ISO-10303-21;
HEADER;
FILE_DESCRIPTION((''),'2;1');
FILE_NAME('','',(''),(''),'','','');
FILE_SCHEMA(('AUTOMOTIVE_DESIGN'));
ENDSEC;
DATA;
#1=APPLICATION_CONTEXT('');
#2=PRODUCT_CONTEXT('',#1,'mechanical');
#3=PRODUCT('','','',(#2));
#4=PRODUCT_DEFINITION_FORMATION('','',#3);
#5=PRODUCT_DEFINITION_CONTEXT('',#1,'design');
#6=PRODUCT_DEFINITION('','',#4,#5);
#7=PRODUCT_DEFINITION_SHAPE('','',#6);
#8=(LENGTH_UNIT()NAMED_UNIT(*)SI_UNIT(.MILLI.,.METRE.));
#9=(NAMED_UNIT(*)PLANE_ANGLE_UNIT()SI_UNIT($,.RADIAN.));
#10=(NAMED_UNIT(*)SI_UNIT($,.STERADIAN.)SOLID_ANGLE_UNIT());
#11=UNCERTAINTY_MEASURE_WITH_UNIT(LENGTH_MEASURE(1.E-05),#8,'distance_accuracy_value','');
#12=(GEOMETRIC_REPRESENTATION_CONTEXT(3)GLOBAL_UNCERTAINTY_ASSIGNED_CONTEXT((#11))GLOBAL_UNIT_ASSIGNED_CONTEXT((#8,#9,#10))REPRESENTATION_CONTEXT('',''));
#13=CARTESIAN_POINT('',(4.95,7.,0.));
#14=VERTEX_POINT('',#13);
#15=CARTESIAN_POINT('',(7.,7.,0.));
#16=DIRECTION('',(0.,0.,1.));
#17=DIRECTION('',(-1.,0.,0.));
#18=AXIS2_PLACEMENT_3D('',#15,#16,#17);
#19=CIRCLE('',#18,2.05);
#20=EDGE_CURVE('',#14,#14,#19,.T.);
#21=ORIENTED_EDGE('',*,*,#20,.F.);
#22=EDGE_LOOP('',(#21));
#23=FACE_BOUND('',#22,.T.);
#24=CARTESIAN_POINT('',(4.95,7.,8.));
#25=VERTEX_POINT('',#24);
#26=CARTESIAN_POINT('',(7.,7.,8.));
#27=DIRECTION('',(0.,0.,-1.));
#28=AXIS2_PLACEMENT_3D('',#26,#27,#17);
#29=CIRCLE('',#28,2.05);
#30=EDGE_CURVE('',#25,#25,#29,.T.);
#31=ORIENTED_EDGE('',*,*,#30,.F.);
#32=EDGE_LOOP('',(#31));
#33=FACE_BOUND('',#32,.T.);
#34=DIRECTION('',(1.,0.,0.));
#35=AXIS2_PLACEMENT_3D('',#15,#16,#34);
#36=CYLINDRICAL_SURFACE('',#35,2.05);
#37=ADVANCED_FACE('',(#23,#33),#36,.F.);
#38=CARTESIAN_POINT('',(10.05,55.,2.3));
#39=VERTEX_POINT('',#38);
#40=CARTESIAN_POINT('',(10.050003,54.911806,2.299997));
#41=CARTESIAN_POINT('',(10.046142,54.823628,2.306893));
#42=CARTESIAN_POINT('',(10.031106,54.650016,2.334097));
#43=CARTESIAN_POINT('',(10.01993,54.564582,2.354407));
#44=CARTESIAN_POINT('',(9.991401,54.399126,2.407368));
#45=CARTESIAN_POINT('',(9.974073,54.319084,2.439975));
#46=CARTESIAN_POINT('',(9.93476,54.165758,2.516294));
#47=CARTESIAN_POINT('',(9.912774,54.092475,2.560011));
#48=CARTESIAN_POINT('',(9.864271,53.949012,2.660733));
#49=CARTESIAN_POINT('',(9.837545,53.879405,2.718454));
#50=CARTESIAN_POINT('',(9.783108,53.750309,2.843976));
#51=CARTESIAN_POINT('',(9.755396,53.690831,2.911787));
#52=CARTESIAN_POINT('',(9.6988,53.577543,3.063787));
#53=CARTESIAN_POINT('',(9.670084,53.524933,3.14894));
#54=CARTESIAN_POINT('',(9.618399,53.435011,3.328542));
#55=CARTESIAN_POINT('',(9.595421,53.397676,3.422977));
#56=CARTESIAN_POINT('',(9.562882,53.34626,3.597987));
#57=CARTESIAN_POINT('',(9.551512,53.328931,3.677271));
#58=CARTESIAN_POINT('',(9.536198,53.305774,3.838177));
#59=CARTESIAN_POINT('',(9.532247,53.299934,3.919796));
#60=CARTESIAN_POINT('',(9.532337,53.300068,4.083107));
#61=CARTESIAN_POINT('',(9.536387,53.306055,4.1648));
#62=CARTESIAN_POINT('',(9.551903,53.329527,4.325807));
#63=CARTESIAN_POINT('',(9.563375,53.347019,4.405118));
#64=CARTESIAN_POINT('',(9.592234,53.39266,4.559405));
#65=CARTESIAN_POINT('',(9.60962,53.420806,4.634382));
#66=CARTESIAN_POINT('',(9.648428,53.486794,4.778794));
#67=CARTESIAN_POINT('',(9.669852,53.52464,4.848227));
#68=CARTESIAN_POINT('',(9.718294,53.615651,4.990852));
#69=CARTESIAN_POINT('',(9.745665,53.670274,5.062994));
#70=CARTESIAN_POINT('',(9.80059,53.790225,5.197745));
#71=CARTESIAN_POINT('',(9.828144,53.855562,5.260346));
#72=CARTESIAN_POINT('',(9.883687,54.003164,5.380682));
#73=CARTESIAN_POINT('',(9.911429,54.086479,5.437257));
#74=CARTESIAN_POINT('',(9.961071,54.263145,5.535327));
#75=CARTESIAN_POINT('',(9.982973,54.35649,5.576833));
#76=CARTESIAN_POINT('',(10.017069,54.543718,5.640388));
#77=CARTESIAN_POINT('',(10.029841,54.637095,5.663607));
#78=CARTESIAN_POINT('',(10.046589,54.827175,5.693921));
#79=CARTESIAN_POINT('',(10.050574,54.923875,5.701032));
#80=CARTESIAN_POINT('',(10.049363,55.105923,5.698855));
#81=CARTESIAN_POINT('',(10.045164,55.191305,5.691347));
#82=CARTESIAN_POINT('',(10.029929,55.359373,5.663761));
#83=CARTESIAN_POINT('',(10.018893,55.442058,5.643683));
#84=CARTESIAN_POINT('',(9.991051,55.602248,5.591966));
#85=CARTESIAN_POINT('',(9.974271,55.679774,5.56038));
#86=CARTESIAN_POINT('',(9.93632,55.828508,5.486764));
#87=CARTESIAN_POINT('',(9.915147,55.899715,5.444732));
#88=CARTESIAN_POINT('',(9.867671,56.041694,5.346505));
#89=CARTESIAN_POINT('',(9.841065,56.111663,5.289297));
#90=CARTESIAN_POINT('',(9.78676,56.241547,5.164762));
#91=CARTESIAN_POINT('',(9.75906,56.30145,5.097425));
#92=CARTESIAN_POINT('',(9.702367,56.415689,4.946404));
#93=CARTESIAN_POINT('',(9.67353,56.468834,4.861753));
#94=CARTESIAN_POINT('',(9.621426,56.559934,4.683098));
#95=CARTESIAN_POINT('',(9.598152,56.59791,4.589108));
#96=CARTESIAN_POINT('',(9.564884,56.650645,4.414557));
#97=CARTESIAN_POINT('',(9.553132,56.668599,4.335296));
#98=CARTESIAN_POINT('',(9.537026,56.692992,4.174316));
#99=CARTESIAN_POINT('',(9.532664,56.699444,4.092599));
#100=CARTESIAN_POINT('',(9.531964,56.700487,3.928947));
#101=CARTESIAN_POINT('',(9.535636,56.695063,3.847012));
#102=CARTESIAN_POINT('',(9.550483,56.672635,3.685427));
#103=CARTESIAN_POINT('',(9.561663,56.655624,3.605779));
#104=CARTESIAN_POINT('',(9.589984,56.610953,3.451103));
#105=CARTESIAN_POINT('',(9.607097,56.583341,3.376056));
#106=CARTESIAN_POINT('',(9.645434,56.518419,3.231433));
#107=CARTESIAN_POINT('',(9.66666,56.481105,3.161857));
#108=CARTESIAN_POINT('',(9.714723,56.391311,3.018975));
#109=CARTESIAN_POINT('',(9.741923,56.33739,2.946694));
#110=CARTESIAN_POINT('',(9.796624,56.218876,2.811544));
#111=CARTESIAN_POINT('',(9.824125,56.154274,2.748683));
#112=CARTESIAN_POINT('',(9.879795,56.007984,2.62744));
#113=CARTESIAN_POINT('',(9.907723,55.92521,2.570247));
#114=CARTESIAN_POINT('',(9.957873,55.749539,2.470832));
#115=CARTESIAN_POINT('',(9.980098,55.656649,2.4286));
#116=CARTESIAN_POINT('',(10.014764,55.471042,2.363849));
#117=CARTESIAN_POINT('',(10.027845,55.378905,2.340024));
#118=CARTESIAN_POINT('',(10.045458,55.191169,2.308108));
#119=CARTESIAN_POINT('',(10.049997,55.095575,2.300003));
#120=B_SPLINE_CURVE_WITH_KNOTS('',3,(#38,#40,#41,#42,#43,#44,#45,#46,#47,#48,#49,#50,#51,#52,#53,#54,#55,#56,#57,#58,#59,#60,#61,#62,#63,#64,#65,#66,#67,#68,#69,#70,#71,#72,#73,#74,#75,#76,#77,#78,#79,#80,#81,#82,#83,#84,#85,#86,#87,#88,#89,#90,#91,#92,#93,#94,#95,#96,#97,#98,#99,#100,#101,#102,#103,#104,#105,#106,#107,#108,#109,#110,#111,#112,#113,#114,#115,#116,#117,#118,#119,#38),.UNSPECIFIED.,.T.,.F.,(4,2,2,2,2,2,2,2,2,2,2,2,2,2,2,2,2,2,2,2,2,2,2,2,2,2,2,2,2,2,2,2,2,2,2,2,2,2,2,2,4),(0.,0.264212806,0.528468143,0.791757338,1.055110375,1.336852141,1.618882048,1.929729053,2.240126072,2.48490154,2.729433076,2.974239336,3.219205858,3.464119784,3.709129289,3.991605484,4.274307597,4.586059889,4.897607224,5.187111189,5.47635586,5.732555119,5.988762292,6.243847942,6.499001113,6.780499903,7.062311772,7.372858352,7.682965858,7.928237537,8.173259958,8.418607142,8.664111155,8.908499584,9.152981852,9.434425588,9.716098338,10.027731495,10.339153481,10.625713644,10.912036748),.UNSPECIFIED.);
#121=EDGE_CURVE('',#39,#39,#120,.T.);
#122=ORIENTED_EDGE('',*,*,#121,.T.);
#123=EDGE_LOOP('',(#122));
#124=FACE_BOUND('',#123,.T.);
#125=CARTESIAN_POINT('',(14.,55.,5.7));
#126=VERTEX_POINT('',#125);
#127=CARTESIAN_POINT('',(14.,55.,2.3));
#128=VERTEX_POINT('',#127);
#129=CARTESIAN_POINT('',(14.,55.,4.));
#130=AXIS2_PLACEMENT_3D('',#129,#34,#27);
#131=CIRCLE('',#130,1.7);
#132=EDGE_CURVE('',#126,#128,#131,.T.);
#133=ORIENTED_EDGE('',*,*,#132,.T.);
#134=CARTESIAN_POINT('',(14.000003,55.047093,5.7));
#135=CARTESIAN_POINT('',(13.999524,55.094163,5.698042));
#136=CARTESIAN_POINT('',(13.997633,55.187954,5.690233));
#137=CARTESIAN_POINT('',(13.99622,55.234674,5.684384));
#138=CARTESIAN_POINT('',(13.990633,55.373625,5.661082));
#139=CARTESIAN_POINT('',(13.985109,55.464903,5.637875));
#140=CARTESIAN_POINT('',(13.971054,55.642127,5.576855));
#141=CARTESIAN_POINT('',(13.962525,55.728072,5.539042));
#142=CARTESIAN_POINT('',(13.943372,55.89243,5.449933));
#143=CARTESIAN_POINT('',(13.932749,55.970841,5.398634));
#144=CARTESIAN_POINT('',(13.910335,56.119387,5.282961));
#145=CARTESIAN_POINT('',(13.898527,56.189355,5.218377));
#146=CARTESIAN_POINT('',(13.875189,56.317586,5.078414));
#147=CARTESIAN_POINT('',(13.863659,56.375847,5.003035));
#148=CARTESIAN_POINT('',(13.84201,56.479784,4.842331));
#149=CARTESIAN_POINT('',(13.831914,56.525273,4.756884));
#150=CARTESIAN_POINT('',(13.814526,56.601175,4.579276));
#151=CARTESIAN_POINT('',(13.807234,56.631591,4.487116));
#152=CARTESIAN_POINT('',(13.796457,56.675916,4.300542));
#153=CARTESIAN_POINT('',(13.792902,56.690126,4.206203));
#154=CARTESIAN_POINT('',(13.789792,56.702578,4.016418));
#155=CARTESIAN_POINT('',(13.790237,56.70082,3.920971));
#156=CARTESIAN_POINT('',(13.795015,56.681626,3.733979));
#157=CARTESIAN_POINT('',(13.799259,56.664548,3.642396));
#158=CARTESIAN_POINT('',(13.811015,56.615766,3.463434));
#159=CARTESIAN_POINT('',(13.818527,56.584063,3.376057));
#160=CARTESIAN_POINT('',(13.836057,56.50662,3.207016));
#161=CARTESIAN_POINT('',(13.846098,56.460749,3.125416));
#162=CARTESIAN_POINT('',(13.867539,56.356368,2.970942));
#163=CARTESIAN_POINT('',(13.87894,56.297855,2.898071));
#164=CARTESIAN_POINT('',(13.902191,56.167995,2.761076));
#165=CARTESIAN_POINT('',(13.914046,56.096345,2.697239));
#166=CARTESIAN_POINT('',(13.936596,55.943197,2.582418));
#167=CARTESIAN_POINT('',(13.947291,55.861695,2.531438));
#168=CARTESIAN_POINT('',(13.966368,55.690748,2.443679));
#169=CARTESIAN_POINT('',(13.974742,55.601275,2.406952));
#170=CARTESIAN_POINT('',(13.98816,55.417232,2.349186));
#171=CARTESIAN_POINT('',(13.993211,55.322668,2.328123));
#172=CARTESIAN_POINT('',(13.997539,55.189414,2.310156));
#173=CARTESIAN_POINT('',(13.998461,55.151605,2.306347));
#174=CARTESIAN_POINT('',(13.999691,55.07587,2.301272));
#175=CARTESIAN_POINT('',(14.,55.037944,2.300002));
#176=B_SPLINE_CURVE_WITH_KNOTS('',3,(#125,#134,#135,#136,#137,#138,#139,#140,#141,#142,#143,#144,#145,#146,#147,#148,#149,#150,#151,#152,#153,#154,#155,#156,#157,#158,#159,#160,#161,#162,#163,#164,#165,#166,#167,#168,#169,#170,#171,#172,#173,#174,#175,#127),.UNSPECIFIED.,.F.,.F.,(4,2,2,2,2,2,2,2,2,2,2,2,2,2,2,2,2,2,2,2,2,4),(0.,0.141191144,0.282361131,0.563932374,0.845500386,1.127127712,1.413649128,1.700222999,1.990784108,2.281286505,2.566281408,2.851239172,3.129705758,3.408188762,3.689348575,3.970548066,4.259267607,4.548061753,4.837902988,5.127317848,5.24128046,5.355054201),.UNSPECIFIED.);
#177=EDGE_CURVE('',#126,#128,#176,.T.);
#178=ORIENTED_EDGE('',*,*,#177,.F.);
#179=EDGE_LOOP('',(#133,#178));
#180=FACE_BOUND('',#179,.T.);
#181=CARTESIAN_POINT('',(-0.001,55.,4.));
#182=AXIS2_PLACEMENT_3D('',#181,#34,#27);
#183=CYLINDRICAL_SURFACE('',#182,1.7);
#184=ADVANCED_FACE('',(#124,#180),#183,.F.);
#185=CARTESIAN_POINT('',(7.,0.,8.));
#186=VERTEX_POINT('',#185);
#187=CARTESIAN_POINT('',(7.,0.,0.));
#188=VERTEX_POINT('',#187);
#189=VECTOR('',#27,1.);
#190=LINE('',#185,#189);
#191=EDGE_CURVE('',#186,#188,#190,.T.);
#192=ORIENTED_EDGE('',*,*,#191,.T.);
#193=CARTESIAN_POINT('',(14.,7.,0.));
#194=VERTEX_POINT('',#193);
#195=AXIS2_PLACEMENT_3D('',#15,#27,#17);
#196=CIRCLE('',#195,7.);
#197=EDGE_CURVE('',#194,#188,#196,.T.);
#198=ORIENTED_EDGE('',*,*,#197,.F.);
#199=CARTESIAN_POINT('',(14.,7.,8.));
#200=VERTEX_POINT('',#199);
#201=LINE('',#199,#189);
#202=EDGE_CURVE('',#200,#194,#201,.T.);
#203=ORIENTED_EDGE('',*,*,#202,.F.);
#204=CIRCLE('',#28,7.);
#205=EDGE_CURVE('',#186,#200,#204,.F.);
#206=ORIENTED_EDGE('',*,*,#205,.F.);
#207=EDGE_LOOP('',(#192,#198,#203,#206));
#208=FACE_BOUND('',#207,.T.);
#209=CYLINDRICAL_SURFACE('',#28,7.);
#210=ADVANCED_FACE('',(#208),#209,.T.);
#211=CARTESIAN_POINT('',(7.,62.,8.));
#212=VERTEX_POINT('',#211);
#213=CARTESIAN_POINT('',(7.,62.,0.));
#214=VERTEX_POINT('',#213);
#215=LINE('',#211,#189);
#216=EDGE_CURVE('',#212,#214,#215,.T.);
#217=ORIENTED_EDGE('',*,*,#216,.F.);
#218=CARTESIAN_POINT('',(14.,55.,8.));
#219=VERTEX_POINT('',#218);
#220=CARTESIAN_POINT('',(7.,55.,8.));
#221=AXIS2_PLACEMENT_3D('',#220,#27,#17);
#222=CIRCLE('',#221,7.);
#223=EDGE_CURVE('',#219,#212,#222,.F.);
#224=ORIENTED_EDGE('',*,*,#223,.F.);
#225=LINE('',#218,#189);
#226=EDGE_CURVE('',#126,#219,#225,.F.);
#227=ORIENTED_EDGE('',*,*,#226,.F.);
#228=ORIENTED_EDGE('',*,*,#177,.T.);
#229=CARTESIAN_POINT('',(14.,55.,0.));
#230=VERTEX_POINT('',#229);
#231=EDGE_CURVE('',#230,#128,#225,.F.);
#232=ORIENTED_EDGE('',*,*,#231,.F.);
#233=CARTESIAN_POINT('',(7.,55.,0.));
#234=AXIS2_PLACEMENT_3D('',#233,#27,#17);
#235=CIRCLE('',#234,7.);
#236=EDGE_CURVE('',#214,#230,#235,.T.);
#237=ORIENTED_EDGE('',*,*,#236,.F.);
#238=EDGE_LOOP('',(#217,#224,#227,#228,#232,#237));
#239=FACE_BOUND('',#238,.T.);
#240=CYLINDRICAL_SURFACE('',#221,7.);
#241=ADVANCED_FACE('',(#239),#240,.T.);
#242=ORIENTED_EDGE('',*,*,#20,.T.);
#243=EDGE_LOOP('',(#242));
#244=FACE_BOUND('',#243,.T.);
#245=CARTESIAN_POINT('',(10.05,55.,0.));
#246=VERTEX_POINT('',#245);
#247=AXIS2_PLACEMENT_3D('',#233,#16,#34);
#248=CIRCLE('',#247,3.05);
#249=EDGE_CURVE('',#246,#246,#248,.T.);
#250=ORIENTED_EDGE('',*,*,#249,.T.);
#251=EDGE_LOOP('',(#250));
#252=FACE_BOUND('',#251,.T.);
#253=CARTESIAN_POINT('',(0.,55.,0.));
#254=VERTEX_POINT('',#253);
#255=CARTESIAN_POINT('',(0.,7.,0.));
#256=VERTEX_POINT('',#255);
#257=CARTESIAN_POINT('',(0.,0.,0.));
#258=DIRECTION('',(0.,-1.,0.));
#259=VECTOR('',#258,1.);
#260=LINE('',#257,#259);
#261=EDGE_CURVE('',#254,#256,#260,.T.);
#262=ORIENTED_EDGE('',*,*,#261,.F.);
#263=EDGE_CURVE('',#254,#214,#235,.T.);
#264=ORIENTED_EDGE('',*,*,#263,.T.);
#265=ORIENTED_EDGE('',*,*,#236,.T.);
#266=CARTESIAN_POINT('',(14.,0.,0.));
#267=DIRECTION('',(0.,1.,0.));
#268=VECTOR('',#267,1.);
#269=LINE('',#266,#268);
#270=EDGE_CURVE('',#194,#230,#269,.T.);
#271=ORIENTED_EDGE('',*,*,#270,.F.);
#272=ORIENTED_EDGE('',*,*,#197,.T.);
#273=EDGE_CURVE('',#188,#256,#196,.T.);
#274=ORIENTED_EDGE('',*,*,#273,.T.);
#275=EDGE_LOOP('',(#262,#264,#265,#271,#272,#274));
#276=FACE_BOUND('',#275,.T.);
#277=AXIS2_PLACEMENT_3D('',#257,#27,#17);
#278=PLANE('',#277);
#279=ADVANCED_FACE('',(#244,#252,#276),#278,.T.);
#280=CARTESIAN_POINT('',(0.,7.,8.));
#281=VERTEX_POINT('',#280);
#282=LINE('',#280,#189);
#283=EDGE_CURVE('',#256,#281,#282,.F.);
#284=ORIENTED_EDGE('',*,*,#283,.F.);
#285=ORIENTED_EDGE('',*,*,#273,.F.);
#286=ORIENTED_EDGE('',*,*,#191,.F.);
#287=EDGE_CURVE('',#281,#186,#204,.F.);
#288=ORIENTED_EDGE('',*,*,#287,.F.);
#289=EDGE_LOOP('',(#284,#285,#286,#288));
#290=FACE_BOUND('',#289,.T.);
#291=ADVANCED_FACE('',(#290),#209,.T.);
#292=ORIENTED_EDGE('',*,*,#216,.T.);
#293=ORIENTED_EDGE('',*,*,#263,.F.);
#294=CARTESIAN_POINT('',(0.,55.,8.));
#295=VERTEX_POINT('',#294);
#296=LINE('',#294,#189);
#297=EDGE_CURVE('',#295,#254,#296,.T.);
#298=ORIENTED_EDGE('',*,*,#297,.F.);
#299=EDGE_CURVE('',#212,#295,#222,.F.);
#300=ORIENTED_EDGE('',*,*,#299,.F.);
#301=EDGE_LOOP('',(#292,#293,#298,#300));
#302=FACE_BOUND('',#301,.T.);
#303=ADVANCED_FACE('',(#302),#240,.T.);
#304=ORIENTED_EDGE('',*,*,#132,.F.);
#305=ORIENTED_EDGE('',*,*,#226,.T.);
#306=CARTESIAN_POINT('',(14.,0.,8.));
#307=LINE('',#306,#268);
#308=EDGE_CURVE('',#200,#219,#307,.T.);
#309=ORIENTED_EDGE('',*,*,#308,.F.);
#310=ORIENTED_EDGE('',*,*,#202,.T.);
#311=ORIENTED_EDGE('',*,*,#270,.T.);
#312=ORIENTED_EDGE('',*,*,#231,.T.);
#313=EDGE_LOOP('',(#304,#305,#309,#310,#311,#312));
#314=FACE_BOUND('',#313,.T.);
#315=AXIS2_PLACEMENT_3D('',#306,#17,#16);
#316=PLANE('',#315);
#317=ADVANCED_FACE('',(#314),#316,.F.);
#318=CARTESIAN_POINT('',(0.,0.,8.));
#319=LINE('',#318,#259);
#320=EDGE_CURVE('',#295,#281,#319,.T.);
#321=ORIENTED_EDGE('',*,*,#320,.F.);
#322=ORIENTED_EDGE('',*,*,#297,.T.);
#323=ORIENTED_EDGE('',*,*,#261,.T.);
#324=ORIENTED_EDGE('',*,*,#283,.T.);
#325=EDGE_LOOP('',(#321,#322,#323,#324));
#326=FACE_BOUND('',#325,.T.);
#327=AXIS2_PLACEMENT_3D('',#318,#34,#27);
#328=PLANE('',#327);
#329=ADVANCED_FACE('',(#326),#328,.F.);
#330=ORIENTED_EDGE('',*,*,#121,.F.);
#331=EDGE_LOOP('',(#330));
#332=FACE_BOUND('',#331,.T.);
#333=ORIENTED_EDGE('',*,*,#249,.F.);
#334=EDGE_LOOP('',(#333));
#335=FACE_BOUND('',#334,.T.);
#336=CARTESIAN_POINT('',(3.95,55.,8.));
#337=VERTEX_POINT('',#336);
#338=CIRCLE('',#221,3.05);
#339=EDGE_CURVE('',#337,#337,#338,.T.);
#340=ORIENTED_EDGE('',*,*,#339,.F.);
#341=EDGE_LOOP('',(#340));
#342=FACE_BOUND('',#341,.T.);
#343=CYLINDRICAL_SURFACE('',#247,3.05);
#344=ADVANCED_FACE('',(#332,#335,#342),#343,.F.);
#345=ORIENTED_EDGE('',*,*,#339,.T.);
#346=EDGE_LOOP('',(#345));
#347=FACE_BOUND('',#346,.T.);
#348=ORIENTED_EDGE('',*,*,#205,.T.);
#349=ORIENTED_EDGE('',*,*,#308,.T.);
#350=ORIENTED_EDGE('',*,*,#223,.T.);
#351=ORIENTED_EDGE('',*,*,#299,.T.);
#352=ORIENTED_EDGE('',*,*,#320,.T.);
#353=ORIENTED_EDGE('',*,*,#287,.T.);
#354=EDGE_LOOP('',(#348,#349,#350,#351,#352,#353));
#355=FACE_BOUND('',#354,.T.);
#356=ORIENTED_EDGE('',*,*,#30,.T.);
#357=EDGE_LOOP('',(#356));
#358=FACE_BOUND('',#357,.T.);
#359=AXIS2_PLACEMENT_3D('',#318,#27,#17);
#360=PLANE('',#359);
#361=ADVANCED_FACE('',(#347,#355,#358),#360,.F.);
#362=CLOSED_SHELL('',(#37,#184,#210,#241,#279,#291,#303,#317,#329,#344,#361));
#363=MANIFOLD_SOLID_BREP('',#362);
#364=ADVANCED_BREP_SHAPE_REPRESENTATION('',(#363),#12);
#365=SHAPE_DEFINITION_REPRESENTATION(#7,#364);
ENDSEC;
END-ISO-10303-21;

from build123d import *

# Parameters (mm, degrees)
ESQUISSE2_W                  = 14
ESQUISSE2_H                  = 62
BOSS_EXTRU_1_DEPTH           = 8
ENL_V_MAT_EXTRU_1_DEPTH      = 65.062469512
ENL_V_MAT_EXTRU_1_DEPTH_BACK = 65.062469512
ESQUISSE3_R                  = 3.05
ESQUISSE3_R_2                = 2.05
CONG_1_R                     = 7
ENL_V_MAT_EXTRU_2_REACH      = 66.062
ENL_V_MAT_EXTRU_2_END_RADIUS = 3.05
ESQUISSE4_R                  = 1.7


with BuildPart() as part:
    # Esquisse2 → Boss.-Extru.1 (new body)
    with BuildSketch(Plane.XY):
        with Locations((7, 31)):
            Rectangle(ESQUISSE2_W, ESQUISSE2_H)
    extrude(amount=BOSS_EXTRU_1_DEPTH)

    # Esquisse3 → Enlèv. mat.-Extru.1 (cut, two sides: drawn at the far end of the back side and taken through both)
    with BuildSketch(Plane.XY.offset(8).offset(-ENL_V_MAT_EXTRU_1_DEPTH_BACK)):
        with Locations((7, 55)):
            Circle(ESQUISSE3_R)
        with Locations(Location((7, 7, 0), (0, 0, 180))):
            Circle(ESQUISSE3_R_2)
    extrude(amount=ENL_V_MAT_EXTRU_1_DEPTH + ENL_V_MAT_EXTRU_1_DEPTH_BACK, mode=Mode.SUBTRACT)

    # Congé1
    cong_1_edges = [part.edges().sort_by_distance(p)[0] for p in [
        (14, 0, 4),
        (0, 0, 4),
        (0, 62, 4),
        (14, 62, 4),
    ]]
    fillet(cong_1_edges, radius=CONG_1_R - 0.0001)  # a hair under: the kernel refuses the full size

    # Enlèv. mat.-Extru.2: up to this cylinder (the profile starts outside it)
    enl_v_mat_extru_2_end = Plane(origin=(7, 55, 4), z_dir=(0, 0, 1)) * Cylinder(ENL_V_MAT_EXTRU_2_END_RADIUS, 139.224, mode=Mode.PRIVATE)
    # Esquisse4 → Enlèv. mat.-Extru.2 (cut, up to the surface)
    with BuildSketch(Plane(origin=(14, 0, 0), x_dir=(0, 0, -1), z_dir=(1, 0, 0)), mode=Mode.PRIVATE) as enl_v_mat_extru_2_sk1:
        with Locations((-4, 55)):
            Circle(ESQUISSE4_R)
    enl_v_mat_extru_2_tool1 = extrude(enl_v_mat_extru_2_sk1.sketch, amount=-ENL_V_MAT_EXTRU_2_REACH, mode=Mode.PRIVATE) - enl_v_mat_extru_2_end
    add(enl_v_mat_extru_2_tool1.solids().sort_by_distance((14, 55, 4))[0], mode=Mode.SUBTRACT)


solid = part.part
